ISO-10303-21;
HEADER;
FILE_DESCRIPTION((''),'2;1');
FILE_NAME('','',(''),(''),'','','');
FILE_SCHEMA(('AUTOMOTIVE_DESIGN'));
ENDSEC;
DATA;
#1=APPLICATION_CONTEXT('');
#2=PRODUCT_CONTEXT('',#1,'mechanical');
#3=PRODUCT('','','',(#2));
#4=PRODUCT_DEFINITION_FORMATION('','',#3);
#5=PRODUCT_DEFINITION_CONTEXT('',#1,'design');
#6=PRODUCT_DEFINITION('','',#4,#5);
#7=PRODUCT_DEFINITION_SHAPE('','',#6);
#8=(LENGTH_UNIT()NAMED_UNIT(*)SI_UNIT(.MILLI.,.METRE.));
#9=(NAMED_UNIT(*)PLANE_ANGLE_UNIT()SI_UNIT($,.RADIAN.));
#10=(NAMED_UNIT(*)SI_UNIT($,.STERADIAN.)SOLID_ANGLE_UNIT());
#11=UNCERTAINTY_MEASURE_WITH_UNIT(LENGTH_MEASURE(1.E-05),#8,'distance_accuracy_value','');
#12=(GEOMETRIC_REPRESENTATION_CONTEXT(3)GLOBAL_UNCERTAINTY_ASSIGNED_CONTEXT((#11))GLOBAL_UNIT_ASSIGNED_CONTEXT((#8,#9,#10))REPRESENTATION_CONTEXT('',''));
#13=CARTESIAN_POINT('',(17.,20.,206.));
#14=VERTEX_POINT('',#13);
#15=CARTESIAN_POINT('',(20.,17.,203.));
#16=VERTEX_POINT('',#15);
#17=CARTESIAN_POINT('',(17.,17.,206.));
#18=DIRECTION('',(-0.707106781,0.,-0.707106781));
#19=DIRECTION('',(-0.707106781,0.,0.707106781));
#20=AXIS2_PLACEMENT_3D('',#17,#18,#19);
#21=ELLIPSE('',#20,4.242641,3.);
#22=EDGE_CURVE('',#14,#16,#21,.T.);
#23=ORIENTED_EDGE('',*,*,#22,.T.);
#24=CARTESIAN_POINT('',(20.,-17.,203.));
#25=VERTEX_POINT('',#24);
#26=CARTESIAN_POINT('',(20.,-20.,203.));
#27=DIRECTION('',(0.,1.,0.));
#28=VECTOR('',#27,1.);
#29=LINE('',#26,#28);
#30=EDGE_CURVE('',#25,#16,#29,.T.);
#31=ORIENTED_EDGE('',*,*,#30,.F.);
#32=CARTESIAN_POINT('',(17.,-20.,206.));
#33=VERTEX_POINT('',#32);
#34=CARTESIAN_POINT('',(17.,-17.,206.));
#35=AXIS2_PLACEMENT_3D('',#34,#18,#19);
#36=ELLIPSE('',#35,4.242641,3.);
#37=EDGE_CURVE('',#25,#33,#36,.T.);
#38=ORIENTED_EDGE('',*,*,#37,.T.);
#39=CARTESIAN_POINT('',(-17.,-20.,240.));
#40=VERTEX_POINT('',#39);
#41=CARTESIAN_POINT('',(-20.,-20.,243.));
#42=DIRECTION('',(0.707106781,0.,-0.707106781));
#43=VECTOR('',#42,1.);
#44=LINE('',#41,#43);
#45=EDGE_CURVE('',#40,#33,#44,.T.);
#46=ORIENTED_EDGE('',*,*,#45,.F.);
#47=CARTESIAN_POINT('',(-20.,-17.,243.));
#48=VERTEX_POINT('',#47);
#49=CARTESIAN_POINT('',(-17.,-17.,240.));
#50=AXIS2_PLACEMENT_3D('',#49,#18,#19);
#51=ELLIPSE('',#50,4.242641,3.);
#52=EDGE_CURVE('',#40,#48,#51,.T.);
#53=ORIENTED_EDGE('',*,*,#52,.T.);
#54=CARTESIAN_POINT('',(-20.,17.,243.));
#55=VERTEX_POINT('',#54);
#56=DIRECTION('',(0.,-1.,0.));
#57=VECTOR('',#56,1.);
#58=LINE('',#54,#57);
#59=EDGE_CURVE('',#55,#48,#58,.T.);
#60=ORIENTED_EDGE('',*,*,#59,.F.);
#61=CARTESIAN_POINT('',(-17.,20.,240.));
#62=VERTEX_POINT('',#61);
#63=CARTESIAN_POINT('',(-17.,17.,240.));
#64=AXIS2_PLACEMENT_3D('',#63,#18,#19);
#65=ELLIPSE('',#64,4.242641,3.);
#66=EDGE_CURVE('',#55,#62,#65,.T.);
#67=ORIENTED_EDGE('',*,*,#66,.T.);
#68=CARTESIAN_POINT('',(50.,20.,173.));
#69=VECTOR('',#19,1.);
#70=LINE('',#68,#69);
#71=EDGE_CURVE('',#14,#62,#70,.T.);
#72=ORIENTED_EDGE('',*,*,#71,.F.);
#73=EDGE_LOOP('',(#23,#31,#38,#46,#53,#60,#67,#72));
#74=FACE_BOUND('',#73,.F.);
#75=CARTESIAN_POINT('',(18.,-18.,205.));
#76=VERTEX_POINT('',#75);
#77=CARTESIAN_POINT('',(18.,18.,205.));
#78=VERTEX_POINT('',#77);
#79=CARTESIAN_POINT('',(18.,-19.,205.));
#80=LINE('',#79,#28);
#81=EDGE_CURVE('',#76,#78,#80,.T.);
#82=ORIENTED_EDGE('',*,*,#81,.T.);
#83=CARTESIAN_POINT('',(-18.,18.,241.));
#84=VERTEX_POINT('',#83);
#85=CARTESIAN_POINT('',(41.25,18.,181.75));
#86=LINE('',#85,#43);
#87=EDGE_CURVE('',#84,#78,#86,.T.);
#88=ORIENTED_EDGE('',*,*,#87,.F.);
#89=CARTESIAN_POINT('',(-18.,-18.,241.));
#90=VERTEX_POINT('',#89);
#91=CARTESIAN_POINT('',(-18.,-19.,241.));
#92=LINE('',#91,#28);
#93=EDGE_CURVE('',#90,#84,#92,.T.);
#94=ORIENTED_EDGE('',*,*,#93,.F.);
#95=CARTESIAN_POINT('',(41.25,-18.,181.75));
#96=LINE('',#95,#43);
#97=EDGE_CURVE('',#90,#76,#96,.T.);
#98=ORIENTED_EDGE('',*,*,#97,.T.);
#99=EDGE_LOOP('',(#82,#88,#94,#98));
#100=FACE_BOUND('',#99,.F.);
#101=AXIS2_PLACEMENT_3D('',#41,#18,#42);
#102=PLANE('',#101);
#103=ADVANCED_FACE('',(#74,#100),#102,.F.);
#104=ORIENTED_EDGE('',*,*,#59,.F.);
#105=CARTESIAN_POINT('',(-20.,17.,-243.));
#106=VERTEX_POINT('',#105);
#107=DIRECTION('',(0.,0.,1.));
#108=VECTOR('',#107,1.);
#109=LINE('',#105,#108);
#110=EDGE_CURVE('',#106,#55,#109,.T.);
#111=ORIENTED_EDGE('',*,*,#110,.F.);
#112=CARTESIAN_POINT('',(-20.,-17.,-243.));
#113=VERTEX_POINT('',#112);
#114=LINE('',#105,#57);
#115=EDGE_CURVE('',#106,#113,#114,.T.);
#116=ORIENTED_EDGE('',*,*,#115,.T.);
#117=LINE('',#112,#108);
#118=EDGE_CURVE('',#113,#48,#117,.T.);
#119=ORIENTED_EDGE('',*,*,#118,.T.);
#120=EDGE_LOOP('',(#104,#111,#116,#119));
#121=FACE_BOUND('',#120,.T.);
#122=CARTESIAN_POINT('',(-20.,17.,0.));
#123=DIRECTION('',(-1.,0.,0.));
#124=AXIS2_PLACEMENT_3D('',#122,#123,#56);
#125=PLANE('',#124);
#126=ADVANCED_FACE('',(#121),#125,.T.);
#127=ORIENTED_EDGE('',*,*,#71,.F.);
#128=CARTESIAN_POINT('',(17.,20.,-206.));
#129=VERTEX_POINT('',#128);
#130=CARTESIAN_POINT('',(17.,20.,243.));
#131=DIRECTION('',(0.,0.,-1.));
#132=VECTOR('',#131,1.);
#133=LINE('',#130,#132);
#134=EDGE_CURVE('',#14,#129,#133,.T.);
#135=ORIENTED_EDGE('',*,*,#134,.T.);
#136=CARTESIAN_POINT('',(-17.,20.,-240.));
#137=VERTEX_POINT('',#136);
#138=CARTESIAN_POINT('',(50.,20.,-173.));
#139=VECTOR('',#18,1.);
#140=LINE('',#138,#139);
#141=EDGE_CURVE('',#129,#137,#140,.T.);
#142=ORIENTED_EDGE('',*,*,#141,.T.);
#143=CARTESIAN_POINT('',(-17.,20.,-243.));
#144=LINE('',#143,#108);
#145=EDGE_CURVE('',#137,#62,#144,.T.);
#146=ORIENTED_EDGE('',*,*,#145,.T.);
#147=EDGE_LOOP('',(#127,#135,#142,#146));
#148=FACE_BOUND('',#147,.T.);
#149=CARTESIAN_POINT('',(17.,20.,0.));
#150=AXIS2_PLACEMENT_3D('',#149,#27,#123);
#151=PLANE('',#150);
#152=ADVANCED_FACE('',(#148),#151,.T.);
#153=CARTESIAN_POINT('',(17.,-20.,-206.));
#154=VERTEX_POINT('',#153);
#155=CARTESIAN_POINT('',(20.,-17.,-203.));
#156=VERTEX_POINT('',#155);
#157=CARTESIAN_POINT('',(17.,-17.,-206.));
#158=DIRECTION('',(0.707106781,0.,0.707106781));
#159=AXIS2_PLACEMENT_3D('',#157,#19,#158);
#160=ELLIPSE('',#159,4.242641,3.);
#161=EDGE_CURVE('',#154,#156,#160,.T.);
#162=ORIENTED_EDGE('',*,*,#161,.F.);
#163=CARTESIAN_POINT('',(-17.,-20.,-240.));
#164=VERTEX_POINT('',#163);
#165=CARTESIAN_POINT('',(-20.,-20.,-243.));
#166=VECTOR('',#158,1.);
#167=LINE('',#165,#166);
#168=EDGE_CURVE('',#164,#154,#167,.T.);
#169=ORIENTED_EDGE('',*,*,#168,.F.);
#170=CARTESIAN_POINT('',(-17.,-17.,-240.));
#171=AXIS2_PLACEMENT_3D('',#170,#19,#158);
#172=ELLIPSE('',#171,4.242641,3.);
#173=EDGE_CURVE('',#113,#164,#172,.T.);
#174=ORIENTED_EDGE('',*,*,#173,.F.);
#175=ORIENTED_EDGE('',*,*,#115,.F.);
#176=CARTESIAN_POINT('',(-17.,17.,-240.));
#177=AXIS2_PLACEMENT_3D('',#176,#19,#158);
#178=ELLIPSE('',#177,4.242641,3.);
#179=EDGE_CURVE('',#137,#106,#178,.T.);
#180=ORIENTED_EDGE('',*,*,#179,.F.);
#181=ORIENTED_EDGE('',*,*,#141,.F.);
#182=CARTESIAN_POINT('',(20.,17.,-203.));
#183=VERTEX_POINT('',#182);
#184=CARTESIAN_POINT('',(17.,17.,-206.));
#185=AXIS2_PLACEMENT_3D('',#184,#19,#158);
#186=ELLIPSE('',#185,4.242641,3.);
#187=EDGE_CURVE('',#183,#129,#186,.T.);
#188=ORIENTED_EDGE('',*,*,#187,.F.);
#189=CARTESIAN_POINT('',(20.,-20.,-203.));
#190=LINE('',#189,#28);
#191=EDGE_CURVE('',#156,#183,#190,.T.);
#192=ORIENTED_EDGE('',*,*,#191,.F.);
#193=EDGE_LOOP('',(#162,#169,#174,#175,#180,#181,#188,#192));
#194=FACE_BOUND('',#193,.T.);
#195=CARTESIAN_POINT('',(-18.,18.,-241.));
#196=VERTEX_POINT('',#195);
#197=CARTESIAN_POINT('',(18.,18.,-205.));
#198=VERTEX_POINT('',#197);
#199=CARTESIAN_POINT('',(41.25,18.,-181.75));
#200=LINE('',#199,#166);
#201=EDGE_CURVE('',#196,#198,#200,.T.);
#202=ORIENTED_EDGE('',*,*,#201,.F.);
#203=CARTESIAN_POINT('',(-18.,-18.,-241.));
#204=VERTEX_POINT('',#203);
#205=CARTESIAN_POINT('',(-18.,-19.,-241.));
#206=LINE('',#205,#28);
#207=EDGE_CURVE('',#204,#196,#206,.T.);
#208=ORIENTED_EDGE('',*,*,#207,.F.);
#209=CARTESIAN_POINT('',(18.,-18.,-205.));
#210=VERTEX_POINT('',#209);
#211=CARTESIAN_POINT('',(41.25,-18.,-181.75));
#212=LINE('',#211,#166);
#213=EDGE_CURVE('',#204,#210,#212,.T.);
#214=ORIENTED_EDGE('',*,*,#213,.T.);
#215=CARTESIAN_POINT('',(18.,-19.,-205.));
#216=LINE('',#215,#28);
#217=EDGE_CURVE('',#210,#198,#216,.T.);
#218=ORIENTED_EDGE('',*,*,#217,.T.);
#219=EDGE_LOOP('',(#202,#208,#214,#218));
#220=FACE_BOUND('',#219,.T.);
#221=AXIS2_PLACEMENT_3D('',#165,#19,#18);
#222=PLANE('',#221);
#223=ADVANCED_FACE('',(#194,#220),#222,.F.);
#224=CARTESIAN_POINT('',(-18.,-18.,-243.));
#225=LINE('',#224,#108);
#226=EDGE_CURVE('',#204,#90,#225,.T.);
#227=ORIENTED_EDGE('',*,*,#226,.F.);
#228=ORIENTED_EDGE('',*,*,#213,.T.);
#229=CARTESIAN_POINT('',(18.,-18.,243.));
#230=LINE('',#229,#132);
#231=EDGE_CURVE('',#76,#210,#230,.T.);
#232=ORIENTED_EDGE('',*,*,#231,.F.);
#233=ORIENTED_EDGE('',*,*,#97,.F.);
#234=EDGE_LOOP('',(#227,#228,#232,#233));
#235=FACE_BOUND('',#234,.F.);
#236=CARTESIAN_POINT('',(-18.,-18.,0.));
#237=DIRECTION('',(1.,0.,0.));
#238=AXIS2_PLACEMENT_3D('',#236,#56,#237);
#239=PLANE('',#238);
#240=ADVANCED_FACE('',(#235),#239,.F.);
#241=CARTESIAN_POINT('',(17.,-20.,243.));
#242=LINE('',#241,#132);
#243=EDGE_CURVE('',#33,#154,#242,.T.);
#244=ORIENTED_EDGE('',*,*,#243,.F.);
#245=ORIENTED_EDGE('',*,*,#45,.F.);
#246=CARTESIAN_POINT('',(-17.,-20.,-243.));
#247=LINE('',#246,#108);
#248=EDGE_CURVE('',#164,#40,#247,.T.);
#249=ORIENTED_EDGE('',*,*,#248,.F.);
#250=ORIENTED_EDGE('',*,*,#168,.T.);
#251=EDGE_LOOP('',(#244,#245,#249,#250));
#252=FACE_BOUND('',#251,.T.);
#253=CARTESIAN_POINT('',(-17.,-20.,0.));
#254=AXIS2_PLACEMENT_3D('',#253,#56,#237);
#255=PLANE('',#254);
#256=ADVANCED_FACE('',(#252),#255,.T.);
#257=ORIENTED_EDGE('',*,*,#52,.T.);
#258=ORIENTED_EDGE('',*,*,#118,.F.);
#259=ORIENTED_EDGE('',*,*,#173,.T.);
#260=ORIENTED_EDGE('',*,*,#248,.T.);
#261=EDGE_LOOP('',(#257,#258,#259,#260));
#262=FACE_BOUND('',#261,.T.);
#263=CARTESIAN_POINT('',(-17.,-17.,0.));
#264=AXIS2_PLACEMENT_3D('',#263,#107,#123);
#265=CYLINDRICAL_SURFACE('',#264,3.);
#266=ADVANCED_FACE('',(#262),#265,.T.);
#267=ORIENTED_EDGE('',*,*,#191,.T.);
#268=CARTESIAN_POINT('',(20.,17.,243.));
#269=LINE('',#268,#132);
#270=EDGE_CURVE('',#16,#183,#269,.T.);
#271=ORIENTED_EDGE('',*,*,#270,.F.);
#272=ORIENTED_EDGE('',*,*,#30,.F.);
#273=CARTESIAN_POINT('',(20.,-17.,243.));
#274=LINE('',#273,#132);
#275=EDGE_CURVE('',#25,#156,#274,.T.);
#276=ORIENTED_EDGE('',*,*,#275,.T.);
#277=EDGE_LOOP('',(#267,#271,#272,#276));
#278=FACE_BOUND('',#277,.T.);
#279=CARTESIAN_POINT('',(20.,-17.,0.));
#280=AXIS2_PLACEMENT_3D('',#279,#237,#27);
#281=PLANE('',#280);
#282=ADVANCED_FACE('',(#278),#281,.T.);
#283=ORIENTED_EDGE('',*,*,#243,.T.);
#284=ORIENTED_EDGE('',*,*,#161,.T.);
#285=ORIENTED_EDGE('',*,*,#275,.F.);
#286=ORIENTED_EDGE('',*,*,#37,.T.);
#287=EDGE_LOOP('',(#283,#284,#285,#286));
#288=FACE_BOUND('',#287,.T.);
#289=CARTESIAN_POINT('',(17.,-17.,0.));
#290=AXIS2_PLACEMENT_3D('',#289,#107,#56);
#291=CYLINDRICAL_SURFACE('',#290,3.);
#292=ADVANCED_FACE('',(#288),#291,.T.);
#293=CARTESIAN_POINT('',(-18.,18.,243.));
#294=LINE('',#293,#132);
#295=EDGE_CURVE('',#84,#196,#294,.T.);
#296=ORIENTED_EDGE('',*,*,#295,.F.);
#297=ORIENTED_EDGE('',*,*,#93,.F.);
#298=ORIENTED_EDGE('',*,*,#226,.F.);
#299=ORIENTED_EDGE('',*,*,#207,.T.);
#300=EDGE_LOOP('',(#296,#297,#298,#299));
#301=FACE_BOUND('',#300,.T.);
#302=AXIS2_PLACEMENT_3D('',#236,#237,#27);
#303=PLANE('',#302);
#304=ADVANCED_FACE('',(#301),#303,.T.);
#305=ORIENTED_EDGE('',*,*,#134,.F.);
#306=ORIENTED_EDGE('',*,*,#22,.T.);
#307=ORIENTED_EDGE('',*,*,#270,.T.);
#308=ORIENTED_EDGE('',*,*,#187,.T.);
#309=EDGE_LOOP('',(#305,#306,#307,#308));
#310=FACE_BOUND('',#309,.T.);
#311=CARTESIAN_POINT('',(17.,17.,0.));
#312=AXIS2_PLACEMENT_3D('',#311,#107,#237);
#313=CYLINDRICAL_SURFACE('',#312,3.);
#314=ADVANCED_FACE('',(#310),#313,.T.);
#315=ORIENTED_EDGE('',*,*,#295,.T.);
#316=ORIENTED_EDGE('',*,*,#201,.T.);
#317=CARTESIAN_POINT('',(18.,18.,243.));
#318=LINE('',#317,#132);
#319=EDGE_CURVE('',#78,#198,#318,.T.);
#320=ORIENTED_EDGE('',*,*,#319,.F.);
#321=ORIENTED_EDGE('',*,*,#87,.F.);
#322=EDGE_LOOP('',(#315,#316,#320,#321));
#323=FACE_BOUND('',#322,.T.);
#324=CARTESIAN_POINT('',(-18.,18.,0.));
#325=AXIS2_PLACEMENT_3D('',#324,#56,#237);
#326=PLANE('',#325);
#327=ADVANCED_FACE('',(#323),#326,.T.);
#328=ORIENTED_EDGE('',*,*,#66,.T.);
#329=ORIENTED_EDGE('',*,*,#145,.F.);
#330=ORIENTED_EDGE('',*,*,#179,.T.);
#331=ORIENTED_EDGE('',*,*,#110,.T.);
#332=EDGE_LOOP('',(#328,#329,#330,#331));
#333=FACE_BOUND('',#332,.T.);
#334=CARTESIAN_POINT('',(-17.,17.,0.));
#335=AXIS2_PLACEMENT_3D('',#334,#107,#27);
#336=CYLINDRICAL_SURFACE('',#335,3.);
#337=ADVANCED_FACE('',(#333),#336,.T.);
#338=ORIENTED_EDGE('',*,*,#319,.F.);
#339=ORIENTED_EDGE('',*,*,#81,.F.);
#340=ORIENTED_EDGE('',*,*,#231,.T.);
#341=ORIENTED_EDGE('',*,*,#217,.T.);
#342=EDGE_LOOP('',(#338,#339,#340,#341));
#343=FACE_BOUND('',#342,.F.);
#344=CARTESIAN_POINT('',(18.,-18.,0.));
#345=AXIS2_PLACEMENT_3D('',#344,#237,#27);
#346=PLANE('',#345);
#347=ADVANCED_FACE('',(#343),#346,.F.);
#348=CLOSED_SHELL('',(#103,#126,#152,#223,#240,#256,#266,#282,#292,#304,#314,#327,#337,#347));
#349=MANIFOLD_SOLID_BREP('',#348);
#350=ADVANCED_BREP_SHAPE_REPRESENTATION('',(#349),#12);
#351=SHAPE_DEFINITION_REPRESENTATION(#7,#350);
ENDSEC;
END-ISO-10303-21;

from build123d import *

# Parameters (mm, degrees)
F0_W     = 36
F0_H     = 36
F1_DEPTH = 243
F3_DEPTH = 40.001


# Not quite as in the source:
# - a pattern or mirror of a feature is missing from the dataset's text; its kind, count and spacing are read off the source's solid


with BuildPart() as f1:
    # F0 (on Top) → F1 (new body, symmetric)
    with BuildSketch(Plane.XY):
        with BuildLine():
            Line((17, 20), (-17, 20))
            ThreePointArc((-17, 20), (-19.1213203436, 19.1213203436), (-20, 17))
            Line((-20, 17), (-20, -17))
            ThreePointArc((-20, -17), (-19.1213203436, -19.1213203436), (-17, -20))
            Line((-17, -20), (17, -20))
            ThreePointArc((17, -20), (19.1213203436, -19.1213203436), (20, -17))
            Line((20, -17), (20, 17))
            ThreePointArc((20, 17), (19.1213203436, 19.1213203436), (17, 20))
        make_face()
        Rectangle(F0_W, F0_H, mode=Mode.SUBTRACT)
    extrude(amount=F1_DEPTH, both=True)

    # F2 (on face) → F3 (cut, through all)
    with BuildSketch(Plane.XZ.offset(20)):
        Polygon((20, 243), (-20, 243), (20, 203), align=None)
    f3 = extrude(amount=-F3_DEPTH, mode=Mode.SUBTRACT)

    # F3_copies: F3 across plane
    add(f3.mirror(Plane(origin=(0, 0, 0), x_dir=(-1, 0, 0), z_dir=(0, 0, -1))), mode=Mode.SUBTRACT)


solid = f1.part
